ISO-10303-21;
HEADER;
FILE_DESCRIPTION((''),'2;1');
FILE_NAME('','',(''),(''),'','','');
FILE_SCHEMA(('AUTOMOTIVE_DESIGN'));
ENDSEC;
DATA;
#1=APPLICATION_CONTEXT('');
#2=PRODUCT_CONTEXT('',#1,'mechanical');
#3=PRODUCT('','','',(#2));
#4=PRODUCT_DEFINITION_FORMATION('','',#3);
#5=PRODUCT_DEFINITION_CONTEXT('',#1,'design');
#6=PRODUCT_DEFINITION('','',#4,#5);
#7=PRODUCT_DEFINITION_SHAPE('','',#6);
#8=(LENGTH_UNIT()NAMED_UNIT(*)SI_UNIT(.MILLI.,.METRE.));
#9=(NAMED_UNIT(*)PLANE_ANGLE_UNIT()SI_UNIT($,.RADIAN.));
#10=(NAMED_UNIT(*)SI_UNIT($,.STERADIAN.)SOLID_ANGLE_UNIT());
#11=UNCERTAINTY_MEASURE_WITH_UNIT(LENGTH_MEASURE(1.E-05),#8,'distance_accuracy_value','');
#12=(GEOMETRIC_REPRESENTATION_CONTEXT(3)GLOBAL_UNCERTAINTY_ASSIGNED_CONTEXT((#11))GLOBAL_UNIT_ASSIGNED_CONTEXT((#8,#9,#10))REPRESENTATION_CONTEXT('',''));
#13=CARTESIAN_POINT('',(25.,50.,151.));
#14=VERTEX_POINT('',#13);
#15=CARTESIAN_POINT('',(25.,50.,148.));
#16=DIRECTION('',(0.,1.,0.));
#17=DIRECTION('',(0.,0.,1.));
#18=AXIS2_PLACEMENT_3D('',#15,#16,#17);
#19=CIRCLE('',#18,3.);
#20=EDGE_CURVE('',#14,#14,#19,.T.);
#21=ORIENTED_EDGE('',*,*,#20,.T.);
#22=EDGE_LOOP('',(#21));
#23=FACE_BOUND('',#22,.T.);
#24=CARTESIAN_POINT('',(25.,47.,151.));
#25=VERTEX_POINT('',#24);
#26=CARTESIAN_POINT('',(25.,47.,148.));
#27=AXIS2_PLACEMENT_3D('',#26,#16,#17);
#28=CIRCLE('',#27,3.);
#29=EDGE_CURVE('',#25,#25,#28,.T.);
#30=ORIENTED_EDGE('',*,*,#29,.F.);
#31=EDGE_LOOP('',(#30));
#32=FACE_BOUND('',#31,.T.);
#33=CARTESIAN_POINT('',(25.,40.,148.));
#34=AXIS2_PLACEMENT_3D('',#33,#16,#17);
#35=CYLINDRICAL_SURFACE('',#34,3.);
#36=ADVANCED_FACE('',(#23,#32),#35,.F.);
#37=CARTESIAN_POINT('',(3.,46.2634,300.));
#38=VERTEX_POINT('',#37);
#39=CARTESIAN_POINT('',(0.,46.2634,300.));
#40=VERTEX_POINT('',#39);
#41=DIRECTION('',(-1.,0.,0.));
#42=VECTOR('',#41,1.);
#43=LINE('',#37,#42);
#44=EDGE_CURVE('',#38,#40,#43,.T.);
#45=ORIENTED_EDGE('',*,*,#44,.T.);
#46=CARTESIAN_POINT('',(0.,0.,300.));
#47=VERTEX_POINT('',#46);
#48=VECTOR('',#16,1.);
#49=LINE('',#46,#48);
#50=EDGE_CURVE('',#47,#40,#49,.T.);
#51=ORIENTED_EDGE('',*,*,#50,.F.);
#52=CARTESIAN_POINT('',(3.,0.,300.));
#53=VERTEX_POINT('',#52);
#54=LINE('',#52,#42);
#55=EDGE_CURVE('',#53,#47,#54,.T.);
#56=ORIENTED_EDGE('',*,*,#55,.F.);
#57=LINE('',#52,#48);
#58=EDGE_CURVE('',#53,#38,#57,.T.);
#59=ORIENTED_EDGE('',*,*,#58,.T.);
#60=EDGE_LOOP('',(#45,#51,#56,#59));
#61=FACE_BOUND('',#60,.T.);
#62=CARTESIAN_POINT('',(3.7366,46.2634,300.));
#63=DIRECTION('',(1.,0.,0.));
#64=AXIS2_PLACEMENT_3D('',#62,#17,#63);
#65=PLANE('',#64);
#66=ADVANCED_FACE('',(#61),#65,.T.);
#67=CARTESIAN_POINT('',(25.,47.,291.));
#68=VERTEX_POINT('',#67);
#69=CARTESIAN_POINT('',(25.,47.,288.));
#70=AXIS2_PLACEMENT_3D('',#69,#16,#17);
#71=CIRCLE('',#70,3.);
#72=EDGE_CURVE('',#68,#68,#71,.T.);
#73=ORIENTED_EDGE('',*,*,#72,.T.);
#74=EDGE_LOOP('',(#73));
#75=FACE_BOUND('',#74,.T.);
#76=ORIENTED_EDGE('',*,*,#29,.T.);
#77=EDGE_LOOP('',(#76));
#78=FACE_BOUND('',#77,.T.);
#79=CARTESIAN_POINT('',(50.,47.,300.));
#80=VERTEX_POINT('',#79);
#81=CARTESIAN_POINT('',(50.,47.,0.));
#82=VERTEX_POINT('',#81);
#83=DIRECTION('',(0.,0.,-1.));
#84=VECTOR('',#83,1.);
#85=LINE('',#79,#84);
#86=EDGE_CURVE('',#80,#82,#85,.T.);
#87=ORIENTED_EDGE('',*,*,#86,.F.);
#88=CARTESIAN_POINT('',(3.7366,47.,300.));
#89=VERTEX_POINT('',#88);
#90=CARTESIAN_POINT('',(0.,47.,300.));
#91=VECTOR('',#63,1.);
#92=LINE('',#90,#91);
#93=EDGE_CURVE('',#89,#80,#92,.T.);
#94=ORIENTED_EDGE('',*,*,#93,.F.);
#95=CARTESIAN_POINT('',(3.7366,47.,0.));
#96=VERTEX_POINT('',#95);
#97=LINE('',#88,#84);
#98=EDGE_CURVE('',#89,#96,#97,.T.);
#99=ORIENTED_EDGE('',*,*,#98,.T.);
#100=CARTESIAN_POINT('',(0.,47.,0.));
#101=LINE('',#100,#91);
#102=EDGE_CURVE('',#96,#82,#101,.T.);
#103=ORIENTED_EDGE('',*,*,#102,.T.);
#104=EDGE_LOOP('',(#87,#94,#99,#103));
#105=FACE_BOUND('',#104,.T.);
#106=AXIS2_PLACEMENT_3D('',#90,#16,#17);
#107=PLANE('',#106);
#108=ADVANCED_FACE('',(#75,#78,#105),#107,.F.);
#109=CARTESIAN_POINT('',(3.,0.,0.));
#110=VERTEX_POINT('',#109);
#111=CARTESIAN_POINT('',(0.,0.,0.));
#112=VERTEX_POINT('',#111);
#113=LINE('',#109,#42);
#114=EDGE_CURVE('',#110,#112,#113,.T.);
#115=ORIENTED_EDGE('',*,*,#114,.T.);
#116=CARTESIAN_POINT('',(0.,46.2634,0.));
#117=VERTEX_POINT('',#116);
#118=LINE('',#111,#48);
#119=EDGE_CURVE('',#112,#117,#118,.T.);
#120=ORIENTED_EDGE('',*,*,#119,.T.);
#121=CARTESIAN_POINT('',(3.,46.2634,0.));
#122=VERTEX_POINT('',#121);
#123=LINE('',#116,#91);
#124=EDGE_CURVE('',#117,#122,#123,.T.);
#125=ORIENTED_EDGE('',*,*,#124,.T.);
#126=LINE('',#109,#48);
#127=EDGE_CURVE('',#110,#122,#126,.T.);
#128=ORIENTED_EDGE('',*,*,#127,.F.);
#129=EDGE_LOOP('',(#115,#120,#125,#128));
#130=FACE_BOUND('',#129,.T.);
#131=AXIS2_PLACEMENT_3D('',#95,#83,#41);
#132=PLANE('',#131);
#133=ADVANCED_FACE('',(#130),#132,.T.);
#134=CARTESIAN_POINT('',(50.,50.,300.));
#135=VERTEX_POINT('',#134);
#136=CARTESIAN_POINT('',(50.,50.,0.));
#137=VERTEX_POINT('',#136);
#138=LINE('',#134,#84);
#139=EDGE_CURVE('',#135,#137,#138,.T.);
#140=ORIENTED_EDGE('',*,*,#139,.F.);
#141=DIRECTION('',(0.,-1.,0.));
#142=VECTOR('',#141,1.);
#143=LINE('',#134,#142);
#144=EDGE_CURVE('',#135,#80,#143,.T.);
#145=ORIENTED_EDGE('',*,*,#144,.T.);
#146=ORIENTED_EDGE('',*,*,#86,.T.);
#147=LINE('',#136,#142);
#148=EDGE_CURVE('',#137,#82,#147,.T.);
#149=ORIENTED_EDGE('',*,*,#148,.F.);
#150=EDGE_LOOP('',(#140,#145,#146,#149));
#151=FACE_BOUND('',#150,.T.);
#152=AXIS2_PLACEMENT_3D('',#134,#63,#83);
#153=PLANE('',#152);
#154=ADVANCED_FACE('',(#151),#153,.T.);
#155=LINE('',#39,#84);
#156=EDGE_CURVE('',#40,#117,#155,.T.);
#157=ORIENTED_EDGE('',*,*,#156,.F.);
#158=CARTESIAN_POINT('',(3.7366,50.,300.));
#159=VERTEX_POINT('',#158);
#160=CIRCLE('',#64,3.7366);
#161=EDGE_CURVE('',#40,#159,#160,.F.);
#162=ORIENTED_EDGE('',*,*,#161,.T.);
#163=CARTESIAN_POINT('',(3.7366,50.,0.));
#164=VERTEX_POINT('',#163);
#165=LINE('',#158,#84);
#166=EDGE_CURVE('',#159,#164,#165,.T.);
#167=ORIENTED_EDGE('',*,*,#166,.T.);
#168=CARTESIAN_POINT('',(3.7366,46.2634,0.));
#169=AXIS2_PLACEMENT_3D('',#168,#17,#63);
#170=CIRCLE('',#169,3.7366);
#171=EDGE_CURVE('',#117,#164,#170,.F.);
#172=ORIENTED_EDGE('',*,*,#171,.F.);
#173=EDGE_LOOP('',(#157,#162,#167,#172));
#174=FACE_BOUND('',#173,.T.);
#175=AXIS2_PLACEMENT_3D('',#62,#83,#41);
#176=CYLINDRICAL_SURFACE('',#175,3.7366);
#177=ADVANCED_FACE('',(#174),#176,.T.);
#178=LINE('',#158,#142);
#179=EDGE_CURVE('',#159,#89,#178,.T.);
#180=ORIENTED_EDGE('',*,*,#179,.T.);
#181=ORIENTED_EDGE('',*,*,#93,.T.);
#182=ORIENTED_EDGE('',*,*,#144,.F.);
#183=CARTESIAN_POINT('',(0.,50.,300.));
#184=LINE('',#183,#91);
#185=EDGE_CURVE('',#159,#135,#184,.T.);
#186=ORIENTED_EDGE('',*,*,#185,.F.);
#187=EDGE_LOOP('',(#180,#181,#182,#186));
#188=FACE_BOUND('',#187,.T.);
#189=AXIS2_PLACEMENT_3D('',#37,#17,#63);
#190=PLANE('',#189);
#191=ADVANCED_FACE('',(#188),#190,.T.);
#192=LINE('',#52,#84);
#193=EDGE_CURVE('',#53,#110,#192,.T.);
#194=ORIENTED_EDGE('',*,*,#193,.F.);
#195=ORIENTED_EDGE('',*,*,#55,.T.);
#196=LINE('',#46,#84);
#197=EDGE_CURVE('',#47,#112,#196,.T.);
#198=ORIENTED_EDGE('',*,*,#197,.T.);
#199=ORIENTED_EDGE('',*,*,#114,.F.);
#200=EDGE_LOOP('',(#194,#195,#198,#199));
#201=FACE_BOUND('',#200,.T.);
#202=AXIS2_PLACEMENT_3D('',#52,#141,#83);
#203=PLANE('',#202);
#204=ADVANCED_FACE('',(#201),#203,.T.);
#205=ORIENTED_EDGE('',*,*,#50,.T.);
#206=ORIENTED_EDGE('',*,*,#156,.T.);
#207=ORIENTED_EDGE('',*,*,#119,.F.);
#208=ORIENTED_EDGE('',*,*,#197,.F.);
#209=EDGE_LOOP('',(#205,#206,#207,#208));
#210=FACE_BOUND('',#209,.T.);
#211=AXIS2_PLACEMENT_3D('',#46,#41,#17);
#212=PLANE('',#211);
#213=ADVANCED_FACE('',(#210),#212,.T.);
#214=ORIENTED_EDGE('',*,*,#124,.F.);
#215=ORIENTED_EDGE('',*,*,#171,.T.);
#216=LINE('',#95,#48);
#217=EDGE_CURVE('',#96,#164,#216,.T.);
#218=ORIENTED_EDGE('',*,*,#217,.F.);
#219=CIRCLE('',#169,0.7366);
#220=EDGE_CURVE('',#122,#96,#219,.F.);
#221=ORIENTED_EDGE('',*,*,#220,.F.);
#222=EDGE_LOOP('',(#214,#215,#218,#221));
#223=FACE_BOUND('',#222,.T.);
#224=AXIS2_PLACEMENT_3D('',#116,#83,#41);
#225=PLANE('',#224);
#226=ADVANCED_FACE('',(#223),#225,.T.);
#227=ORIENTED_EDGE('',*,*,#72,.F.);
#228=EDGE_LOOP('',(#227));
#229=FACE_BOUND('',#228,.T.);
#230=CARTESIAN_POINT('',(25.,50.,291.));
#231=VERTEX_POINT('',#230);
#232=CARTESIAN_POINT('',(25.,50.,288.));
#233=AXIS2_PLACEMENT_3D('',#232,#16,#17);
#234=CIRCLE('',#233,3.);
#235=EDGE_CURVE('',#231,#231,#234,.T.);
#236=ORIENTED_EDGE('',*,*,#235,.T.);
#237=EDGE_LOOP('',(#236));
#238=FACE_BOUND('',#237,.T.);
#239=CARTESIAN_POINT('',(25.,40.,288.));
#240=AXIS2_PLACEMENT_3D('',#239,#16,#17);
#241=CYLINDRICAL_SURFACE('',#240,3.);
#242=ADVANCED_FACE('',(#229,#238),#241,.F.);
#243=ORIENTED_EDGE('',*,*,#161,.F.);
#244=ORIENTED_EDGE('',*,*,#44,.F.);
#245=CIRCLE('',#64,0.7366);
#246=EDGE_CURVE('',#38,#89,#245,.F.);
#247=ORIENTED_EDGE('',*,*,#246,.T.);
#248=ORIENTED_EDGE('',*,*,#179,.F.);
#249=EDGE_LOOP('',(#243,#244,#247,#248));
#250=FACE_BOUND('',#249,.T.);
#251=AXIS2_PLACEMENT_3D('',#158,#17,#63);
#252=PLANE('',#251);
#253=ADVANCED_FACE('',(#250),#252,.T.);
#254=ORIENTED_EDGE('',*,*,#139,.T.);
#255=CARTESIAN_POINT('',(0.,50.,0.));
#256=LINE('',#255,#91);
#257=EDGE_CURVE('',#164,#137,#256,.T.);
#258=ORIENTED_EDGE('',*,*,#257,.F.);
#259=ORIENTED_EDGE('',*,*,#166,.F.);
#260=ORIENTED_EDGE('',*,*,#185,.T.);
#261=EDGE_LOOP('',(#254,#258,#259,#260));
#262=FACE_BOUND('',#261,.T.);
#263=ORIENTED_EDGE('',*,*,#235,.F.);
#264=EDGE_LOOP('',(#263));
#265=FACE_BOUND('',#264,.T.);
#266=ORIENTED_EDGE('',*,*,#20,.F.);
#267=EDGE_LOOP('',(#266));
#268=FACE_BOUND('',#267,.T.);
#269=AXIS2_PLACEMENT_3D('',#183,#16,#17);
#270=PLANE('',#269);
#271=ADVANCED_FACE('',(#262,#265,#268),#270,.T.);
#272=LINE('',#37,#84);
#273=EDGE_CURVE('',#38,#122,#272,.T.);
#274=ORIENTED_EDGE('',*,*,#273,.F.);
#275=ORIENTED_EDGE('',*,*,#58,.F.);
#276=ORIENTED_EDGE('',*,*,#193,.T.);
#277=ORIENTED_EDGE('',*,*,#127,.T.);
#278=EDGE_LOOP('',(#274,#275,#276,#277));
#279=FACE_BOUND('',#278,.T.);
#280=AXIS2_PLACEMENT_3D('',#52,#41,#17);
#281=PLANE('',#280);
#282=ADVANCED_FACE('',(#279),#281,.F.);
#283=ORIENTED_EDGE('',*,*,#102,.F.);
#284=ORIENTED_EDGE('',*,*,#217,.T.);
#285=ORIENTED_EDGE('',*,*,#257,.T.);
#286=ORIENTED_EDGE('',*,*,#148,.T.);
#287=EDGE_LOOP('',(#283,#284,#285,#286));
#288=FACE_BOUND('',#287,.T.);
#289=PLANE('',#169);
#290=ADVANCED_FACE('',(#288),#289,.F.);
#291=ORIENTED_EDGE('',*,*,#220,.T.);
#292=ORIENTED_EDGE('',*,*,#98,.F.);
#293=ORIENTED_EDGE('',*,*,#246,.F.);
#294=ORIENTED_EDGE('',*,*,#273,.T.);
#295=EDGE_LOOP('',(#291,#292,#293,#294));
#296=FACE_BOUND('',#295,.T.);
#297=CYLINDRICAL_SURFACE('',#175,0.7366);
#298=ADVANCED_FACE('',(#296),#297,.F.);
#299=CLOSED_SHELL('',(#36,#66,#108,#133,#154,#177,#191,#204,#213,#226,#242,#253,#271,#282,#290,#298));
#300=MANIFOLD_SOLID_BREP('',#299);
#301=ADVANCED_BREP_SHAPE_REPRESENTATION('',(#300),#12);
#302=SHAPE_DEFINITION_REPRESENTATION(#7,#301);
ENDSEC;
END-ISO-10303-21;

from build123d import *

# Parameters (mm, degrees)
BASE_FLANGE1_DEPTH = 300
SKETCH6_R          = 3
CUT_EXTRUDE1_DEPTH = 10


# Sheet-metal steps are written as plain solids
with BuildPart() as part:
    # Sketch1 → Base-Flange1 (new body)
    with BuildSketch(Plane.XY):
        with BuildLine():
            Line((0, 0), (0, 46.2634))
            ThreePointArc((0, 46.2634), (1.094424801, 48.905575199), (3.7366, 50))
            Line((3.7366, 50), (50, 50))
            Line((50, 50), (50, 47))
            Line((50, 47), (3.7366, 47))
            ThreePointArc((3.7366, 47), (3.215745145, 46.784254855), (3, 46.2634))
            Line((3, 46.2634), (3, 0))
            Line((3, 0), (0, 0))
        make_face()
    extrude(amount=BASE_FLANGE1_DEPTH)

    # Sketch6 → Cut-Extrude1 (cut)
    with BuildSketch(Plane(origin=(0, 50, 0), x_dir=(1, 0, 0), z_dir=(0, 1, 0))):
        with Locations(Location((25, -288, 0), (0, 0, 270))):
            Circle(SKETCH6_R)
        with Locations(Location((25, -148, 0), (0, 0, 270))):
            Circle(SKETCH6_R)
    extrude(amount=-CUT_EXTRUDE1_DEPTH, mode=Mode.SUBTRACT)


solid = part.part
